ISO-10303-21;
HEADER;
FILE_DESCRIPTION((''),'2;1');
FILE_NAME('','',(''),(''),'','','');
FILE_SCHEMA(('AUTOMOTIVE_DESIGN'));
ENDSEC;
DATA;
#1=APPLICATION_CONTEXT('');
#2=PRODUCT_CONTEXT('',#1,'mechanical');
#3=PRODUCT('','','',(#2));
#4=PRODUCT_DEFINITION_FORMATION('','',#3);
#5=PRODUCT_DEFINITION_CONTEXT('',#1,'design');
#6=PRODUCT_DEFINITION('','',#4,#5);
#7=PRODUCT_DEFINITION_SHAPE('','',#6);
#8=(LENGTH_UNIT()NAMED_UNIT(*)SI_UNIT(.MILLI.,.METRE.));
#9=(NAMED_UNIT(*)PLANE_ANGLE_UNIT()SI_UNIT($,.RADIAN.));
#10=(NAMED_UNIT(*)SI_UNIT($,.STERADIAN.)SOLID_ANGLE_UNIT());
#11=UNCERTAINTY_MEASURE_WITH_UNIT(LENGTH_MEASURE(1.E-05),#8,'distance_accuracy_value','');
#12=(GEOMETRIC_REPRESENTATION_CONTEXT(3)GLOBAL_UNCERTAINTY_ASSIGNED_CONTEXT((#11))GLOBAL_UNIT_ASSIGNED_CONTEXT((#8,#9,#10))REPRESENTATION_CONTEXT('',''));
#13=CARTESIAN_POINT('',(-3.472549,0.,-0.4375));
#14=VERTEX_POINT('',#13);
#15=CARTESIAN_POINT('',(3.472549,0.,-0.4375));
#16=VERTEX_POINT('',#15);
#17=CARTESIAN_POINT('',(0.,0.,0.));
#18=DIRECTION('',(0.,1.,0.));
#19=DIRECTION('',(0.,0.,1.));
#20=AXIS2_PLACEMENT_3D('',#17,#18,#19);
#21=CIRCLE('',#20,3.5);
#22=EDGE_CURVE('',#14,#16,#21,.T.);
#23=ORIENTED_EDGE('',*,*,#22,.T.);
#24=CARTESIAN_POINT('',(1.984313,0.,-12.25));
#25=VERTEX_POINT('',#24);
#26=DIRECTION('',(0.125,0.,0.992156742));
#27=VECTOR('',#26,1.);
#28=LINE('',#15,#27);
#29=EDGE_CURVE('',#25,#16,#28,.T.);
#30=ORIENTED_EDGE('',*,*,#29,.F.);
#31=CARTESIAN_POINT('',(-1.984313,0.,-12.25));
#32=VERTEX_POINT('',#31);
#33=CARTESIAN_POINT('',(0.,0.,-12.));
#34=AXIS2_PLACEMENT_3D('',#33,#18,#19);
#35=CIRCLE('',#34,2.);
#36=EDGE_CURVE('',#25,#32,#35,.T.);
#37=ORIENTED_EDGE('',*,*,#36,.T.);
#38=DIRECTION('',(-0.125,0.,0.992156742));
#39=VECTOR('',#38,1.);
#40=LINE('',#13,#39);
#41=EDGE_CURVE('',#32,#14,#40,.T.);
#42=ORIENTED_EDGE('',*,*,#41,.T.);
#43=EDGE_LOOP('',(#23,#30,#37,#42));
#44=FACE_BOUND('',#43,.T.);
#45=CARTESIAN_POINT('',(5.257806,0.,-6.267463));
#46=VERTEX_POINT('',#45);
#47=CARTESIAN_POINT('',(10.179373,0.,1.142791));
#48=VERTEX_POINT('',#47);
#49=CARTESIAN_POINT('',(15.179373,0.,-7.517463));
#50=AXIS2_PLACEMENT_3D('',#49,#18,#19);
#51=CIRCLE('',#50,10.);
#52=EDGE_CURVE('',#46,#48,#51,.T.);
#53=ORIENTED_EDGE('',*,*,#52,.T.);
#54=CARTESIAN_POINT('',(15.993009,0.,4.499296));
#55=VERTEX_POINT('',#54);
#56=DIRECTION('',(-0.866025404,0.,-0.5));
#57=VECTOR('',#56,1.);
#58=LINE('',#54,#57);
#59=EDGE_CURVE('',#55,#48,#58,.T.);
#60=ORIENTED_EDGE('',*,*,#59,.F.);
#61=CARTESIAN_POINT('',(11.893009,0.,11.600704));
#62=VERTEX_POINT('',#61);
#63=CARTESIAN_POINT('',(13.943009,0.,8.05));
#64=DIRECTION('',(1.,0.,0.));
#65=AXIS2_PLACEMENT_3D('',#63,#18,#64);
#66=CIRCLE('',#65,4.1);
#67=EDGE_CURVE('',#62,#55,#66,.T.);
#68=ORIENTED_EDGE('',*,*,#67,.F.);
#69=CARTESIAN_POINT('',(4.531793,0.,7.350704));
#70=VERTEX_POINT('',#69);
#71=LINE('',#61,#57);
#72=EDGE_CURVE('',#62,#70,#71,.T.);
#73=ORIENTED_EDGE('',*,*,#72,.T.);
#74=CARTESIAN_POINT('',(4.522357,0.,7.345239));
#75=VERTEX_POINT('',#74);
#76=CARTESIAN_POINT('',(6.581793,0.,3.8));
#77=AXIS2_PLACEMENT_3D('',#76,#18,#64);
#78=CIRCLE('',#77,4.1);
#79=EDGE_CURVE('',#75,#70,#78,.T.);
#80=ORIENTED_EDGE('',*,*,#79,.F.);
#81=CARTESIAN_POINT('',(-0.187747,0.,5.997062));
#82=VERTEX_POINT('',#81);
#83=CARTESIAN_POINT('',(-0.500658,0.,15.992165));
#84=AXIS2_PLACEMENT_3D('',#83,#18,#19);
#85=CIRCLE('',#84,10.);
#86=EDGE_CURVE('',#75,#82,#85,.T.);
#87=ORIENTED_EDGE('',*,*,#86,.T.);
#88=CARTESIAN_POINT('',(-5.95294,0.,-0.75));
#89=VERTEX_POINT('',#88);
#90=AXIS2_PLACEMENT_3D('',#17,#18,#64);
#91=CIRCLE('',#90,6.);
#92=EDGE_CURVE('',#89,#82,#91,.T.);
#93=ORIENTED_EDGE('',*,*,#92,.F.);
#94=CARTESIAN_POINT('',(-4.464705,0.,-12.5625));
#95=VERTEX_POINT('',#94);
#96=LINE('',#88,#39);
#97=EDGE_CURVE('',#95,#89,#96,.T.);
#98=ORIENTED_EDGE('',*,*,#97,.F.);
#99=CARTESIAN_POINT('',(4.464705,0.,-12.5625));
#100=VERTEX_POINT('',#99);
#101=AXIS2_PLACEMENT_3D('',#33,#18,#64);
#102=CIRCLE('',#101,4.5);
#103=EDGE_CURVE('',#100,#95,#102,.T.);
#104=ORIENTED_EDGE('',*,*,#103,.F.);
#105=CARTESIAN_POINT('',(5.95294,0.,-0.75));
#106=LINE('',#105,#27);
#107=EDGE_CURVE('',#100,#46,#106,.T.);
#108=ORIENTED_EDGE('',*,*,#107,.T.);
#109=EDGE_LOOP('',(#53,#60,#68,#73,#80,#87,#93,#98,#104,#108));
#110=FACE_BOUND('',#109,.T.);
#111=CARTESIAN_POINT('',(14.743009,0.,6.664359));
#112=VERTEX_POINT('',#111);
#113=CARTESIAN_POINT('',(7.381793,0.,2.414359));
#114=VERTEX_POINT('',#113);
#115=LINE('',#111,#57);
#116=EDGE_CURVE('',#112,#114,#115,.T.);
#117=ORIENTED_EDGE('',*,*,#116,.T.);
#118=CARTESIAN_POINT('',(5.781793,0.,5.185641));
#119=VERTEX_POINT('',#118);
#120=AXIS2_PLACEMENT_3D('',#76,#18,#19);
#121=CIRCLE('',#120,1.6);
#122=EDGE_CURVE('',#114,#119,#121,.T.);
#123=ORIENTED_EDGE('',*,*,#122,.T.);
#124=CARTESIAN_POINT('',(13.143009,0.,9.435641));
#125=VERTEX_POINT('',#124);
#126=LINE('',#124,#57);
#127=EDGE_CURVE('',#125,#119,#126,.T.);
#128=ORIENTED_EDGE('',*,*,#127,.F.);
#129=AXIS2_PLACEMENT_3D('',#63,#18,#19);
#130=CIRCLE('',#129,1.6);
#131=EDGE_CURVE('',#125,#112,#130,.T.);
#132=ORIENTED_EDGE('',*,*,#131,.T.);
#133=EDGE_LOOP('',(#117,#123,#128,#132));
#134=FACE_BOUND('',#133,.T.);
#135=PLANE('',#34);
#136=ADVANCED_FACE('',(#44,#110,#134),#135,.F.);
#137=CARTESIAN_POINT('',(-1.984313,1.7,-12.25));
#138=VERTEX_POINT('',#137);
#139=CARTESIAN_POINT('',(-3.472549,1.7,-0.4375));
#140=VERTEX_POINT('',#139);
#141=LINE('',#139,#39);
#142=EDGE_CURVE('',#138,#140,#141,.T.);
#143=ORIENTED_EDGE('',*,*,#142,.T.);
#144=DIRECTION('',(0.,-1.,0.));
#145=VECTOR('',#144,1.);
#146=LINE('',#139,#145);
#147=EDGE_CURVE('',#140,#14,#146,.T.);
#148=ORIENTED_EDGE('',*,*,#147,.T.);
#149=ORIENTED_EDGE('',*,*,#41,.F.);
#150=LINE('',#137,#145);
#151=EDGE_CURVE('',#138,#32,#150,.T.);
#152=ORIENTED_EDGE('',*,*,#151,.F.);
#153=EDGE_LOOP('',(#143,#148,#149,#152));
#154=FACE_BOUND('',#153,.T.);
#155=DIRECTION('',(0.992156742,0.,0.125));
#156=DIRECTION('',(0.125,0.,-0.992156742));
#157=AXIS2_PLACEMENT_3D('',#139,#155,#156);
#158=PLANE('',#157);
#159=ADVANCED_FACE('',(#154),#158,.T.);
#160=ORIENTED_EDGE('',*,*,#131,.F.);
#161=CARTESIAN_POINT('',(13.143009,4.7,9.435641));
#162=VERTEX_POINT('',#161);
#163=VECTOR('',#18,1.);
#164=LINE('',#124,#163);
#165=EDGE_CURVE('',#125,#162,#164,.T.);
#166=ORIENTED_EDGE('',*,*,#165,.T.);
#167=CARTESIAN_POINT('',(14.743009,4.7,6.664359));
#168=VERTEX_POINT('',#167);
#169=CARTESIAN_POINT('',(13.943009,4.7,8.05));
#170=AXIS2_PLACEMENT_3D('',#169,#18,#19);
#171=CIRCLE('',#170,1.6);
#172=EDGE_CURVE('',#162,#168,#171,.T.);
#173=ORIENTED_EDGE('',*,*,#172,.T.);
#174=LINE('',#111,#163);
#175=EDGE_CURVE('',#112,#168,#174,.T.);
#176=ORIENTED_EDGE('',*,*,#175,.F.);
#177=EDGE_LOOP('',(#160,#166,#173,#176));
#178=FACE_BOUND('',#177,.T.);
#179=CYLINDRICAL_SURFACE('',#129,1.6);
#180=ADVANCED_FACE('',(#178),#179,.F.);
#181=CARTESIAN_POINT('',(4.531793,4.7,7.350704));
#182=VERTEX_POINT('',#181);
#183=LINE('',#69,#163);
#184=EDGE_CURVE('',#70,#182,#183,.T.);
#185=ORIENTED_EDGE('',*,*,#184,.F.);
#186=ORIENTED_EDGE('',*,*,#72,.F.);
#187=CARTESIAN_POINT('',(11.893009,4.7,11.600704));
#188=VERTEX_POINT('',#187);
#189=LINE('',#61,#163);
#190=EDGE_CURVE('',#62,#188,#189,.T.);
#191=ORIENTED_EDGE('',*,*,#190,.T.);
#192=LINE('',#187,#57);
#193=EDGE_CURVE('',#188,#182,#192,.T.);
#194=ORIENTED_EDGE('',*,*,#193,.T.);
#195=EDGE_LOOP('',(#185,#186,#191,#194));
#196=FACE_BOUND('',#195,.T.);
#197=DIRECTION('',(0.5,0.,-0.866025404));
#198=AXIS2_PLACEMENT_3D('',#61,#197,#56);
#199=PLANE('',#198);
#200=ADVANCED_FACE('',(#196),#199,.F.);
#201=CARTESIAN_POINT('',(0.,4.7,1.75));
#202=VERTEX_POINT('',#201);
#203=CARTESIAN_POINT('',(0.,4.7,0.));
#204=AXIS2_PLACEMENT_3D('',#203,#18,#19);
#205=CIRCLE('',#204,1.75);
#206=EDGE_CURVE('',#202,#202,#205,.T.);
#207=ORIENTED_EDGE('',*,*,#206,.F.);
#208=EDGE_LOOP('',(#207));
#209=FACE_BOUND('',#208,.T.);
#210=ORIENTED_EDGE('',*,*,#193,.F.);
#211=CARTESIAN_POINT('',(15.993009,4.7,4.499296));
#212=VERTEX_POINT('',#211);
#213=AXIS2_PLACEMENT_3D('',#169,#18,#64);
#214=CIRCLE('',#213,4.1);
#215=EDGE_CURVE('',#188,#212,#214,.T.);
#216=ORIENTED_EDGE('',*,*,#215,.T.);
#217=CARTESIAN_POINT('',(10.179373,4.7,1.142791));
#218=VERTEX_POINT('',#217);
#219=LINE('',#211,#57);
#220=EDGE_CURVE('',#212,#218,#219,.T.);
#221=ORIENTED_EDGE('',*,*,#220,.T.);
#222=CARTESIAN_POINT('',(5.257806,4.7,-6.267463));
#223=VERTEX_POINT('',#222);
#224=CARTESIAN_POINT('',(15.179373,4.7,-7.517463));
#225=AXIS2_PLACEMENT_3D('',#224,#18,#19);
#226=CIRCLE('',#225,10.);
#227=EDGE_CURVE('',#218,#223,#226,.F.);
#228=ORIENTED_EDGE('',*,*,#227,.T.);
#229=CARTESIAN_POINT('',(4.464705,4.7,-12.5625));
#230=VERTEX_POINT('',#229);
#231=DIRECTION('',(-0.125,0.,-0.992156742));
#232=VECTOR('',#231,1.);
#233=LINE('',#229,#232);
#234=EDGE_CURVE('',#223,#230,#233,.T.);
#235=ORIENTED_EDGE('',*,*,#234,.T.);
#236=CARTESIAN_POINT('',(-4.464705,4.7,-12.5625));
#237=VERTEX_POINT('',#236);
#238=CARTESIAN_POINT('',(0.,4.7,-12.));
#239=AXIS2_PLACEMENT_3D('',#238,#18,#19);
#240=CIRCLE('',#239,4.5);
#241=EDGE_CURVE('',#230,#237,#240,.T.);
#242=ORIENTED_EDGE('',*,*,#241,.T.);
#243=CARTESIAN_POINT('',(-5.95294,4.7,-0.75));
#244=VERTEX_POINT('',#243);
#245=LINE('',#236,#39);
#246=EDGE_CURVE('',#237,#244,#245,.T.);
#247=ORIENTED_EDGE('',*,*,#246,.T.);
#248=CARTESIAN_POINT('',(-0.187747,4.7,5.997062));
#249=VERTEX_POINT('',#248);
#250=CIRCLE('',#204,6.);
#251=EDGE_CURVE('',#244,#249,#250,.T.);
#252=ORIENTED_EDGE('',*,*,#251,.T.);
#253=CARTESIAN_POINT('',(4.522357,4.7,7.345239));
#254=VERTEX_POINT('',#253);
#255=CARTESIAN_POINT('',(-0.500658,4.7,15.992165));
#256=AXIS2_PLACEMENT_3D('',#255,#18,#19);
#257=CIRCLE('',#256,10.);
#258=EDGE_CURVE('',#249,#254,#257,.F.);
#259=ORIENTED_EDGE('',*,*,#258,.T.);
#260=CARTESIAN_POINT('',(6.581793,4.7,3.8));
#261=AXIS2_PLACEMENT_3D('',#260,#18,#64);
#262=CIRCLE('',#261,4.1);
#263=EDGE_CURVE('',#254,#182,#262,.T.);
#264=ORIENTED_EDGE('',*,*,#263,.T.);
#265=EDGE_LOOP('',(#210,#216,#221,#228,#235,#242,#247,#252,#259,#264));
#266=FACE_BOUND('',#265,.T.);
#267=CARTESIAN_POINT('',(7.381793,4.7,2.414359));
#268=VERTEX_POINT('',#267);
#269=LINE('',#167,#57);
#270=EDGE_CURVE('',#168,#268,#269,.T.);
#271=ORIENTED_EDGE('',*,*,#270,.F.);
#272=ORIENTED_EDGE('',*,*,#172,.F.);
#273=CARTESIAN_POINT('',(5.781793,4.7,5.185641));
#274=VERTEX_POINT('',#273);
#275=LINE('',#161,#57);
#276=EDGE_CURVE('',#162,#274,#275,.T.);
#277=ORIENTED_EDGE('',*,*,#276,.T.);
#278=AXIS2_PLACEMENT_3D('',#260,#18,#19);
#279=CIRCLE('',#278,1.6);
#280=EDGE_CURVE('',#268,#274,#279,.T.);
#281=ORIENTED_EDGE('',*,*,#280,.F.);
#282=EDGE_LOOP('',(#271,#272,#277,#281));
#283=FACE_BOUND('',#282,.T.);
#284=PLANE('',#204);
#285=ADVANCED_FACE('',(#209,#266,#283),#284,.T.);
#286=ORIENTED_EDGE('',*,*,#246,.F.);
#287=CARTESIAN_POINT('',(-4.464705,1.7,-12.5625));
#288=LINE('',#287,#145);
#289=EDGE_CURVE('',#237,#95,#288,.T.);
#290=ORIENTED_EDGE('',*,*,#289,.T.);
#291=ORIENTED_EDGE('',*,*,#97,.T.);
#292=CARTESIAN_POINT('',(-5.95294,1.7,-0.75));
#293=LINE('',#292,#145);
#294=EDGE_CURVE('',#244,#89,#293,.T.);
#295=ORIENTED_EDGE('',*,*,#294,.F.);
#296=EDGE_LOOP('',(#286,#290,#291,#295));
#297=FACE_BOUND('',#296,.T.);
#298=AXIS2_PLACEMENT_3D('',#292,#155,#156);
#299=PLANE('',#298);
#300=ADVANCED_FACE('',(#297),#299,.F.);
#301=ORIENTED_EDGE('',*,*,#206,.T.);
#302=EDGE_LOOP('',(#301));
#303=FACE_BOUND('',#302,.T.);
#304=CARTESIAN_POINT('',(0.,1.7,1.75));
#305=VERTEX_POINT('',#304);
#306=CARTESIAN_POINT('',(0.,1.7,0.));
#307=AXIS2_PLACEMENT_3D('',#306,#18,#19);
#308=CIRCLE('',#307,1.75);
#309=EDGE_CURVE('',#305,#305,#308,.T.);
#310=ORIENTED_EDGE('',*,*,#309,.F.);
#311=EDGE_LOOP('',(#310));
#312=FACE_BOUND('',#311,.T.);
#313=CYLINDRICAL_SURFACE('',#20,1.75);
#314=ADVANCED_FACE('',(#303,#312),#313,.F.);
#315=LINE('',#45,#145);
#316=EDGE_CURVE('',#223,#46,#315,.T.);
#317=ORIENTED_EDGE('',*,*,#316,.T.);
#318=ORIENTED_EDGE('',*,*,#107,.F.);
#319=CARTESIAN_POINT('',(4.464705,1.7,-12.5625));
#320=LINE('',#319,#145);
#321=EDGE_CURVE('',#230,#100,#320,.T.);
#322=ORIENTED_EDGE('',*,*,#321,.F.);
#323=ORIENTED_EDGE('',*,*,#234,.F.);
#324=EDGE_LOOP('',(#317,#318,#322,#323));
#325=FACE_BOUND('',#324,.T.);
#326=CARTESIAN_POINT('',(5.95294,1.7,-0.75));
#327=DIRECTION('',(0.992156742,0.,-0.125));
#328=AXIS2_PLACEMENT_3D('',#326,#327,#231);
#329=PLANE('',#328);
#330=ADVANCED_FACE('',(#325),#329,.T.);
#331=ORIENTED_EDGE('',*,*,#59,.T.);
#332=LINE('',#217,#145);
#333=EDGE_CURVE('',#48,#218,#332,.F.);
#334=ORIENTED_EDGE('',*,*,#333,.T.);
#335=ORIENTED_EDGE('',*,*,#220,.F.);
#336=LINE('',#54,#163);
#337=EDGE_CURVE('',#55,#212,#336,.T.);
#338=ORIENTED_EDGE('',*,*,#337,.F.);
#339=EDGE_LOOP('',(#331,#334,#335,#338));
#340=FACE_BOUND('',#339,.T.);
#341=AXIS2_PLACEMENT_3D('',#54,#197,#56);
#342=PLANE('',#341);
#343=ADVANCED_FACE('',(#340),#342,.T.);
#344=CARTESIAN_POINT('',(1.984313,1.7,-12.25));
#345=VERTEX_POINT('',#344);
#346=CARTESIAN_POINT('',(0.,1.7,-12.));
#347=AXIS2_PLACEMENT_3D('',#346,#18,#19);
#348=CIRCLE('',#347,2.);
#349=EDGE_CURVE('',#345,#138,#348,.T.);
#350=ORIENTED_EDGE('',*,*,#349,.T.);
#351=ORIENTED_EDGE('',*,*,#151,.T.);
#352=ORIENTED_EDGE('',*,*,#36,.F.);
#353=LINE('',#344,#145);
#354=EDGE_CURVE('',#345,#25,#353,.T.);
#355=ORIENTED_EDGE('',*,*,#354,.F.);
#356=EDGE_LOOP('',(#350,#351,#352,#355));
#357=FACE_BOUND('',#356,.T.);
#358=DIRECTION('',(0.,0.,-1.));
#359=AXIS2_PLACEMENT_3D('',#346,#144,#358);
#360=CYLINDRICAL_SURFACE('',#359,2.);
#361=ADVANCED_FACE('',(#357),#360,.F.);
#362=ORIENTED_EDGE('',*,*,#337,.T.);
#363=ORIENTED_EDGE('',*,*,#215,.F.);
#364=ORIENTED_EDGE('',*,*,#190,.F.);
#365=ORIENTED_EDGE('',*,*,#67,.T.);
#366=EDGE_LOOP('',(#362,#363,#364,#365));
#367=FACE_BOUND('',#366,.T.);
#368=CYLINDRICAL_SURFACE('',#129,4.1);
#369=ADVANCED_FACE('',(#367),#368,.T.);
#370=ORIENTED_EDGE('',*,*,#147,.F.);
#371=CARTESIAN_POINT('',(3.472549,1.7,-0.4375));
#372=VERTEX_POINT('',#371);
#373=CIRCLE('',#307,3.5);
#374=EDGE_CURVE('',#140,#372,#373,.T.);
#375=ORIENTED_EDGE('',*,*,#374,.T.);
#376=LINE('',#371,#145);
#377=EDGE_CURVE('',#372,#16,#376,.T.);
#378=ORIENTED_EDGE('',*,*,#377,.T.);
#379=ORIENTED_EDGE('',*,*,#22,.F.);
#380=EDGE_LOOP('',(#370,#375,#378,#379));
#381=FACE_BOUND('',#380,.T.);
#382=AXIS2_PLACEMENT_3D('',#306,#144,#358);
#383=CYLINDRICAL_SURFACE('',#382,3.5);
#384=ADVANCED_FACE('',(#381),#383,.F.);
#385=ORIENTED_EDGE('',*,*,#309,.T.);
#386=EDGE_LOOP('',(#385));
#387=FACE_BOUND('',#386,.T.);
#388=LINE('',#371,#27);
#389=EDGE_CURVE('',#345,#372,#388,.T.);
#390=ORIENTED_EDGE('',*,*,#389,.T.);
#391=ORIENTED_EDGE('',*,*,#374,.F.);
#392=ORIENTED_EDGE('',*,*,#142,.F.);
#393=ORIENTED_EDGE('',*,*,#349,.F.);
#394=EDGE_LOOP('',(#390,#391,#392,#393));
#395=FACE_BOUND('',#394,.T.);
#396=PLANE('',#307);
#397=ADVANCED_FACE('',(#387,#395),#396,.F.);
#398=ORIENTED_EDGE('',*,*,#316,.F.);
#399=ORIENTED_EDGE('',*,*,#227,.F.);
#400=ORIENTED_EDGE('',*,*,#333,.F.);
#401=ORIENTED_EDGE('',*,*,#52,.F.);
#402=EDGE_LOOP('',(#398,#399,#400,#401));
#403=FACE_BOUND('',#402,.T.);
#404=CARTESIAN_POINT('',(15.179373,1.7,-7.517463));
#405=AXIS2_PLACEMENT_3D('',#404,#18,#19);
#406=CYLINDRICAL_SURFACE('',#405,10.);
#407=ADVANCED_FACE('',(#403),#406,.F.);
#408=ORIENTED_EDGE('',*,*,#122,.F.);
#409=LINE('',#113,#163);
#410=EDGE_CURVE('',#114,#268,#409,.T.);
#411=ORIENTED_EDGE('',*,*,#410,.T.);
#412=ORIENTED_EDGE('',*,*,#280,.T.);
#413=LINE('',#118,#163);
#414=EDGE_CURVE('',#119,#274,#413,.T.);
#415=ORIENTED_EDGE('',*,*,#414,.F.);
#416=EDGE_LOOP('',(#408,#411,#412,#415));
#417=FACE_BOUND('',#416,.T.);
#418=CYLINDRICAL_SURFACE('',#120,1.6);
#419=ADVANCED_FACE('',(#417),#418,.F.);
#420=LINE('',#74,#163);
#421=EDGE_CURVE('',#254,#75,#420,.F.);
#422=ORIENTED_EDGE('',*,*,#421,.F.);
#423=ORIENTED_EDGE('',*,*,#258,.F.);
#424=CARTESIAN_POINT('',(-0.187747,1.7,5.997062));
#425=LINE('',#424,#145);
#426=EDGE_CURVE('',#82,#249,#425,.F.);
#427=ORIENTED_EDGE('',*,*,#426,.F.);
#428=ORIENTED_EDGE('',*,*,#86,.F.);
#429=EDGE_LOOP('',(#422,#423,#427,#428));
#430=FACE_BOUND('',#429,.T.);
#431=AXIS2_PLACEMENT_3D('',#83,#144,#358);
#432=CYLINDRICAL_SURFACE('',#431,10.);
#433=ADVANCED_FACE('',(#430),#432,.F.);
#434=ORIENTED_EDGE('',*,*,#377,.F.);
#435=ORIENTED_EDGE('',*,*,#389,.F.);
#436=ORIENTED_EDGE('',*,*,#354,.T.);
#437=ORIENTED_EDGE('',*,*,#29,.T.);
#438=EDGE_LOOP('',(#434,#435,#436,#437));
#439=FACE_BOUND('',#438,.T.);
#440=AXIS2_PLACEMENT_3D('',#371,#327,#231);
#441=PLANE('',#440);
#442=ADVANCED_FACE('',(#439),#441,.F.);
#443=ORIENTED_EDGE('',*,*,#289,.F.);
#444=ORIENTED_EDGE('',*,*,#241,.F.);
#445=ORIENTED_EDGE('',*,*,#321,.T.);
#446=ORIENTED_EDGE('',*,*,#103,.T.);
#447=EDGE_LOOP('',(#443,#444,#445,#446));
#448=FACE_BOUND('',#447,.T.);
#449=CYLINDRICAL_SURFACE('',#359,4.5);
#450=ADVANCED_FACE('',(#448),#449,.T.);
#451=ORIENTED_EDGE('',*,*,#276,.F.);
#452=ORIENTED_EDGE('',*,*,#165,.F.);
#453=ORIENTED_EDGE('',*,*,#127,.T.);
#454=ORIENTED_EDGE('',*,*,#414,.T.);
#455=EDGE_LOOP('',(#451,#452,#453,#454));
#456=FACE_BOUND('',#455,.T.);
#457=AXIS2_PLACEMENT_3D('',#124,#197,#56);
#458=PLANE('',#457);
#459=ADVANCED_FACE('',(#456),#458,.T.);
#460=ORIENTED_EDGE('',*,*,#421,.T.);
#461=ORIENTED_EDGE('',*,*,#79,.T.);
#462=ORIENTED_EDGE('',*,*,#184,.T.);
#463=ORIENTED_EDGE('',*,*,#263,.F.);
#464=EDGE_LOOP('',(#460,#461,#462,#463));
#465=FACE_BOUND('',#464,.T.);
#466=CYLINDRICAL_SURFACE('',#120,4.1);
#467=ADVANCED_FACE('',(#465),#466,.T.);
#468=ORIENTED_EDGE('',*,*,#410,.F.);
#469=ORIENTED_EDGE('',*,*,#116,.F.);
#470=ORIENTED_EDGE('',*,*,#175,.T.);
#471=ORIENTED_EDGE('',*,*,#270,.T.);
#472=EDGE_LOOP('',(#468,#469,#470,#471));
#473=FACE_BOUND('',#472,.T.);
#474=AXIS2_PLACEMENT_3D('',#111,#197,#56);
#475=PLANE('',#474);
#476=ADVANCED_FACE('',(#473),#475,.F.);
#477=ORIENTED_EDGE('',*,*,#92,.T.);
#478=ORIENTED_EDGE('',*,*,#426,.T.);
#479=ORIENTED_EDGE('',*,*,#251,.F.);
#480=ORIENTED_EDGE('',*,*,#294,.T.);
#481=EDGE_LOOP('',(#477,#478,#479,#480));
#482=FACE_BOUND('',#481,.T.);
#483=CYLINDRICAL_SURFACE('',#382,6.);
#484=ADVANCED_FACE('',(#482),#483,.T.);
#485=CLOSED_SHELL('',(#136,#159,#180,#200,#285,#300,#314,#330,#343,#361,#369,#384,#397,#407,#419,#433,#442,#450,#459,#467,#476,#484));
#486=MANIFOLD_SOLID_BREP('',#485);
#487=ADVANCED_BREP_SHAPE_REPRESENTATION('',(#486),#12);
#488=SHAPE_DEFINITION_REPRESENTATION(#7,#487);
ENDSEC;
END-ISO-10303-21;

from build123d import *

# Parameters (mm, degrees)
EXTRUDE_THIN1_DEPTH = 1.7
BOSS_EXTRUDE1_DEPTH = 3
EXTRUDE_THIN2_DEPTH = 4.7
FILLET1_R           = 10
SKETCH5_R           = 1.75
CUT_EXTRUDE1_DEPTH  = 25.897593892909114


# Read off the part's stored shape, not the designer's step: Extrude-Thin1
with BuildPart() as part:
    # Extrude-Thin1 outline → Extrude-Thin1 (new body)
    with BuildSketch(Plane(origin=(0, 0, 0), x_dir=(1, 0, 0), z_dir=(0, 1, 0))):
        with BuildLine():
            ThreePointArc((4.464705337, 12.5625), (0, 16.5), (-4.464705337, 12.5625))
            Line((-4.464705337, 12.5625), (-5.95294045, 0.75))
            ThreePointArc((-5.95294045, 0.75), (0, -6), (5.95294045, 0.75))
            Line((5.95294045, 0.75), (4.464705337, 12.5625))
        make_face()
        with BuildLine():
            Line((-3.472548596, 0.4375), (-1.984313483, 12.25))
            ThreePointArc((-1.984313483, 12.25), (0, 14), (1.984313483, 12.25))
            Line((1.984313483, 12.25), (3.472548596, 0.4375))
            ThreePointArc((3.472548596, 0.4375), (0, -3.5), (-3.472548596, 0.4375))
        make_face(mode=Mode.SUBTRACT)
    extrude(amount=EXTRUDE_THIN1_DEPTH)

    # Sketch2 → Boss-Extrude1 (add)
    with BuildSketch(Plane(origin=(0, 1.7, 0), x_dir=(1, 0, 0), z_dir=(0, 1, 0))):
        with BuildLine():
            Line((4.464705337421497, 12.5625), (5.952940449895328, 0.7499999999999997))
            ThreePointArc((5.952940449895328, 0.7499999999999997), (-1.1e-15, -6.000000000000001), (-5.95294044989533, 0.7500000000000003))
            Line((-5.95294044989533, 0.7500000000000003), (-4.464705337421497, 12.562499999999998))
            ThreePointArc((-4.464705337421497, 12.562499999999998), (-7.2e-16, 16.5), (4.464705337421497, 12.5625))
        make_face()
    extrude(amount=BOSS_EXTRUDE1_DEPTH)

    # Sketch4 → Extrude-Thin2 (add, through all)
    with BuildSketch(Plane(origin=(0, 4.7, 0), x_dir=(1, 0, 0), z_dir=(0, 1, 0))):
        with BuildLine():
            Line((8.631793068761734, -0.2492958444837754), (15.993009000929478, -4.499295844483755))
            ThreePointArc((15.99300900092945, -4.499295844483736), (17.49371315644571, -10.099999999999966), (11.893009000929466, -11.600704155516153))
            Line((11.893009000929494, -11.60070415551617), (4.531793068761752, -7.350704155516189))
            ThreePointArc((4.531793068761758, -7.350704155516187), (3.0310889132455334, -1.7499999999999925), (8.631793068761736, -0.24929584448377584))
        make_face()
        with BuildLine():
            Line((7.381793068761741, -2.4143593539448753), (14.743009000929485, -6.664359353944855))
            ThreePointArc((14.743009000929485, -6.664359353944855), (15.328649646984612, -8.849999999999971), (13.143009000929489, -9.43564064605507))
            Line((13.143009000929489, -9.43564064605507), (5.781793068761747, -5.185640646055089))
            ThreePointArc((5.781793068761747, -5.185640646055089), (5.196152422706634, -2.999999999999985), (7.381793068761741, -2.4143593539448753))
        make_face(mode=Mode.SUBTRACT)
    extrude(amount=-EXTRUDE_THIN2_DEPTH)

    # Fillet1
    fillet1_edges = [part.edges().sort_by_distance(p)[0] for p in [
        (5.994462735157251, 3.2, -0.2577140213706832),
        (2.7740444781602016, 3.2, 5.320214021370655),
    ]]
    fillet(fillet1_edges, radius=FILLET1_R)

    # Sketch5 → Cut-Extrude1 (cut, through all)
    with BuildSketch(Plane(origin=(0, 4.7, 0), x_dir=(1, 0, 0), z_dir=(0, 1, 0))):
        with Locations(Location((0, 0, 0), (0, 0, 270))):
            Circle(SKETCH5_R)
    extrude(amount=-CUT_EXTRUDE1_DEPTH, mode=Mode.SUBTRACT)


solid = part.part
